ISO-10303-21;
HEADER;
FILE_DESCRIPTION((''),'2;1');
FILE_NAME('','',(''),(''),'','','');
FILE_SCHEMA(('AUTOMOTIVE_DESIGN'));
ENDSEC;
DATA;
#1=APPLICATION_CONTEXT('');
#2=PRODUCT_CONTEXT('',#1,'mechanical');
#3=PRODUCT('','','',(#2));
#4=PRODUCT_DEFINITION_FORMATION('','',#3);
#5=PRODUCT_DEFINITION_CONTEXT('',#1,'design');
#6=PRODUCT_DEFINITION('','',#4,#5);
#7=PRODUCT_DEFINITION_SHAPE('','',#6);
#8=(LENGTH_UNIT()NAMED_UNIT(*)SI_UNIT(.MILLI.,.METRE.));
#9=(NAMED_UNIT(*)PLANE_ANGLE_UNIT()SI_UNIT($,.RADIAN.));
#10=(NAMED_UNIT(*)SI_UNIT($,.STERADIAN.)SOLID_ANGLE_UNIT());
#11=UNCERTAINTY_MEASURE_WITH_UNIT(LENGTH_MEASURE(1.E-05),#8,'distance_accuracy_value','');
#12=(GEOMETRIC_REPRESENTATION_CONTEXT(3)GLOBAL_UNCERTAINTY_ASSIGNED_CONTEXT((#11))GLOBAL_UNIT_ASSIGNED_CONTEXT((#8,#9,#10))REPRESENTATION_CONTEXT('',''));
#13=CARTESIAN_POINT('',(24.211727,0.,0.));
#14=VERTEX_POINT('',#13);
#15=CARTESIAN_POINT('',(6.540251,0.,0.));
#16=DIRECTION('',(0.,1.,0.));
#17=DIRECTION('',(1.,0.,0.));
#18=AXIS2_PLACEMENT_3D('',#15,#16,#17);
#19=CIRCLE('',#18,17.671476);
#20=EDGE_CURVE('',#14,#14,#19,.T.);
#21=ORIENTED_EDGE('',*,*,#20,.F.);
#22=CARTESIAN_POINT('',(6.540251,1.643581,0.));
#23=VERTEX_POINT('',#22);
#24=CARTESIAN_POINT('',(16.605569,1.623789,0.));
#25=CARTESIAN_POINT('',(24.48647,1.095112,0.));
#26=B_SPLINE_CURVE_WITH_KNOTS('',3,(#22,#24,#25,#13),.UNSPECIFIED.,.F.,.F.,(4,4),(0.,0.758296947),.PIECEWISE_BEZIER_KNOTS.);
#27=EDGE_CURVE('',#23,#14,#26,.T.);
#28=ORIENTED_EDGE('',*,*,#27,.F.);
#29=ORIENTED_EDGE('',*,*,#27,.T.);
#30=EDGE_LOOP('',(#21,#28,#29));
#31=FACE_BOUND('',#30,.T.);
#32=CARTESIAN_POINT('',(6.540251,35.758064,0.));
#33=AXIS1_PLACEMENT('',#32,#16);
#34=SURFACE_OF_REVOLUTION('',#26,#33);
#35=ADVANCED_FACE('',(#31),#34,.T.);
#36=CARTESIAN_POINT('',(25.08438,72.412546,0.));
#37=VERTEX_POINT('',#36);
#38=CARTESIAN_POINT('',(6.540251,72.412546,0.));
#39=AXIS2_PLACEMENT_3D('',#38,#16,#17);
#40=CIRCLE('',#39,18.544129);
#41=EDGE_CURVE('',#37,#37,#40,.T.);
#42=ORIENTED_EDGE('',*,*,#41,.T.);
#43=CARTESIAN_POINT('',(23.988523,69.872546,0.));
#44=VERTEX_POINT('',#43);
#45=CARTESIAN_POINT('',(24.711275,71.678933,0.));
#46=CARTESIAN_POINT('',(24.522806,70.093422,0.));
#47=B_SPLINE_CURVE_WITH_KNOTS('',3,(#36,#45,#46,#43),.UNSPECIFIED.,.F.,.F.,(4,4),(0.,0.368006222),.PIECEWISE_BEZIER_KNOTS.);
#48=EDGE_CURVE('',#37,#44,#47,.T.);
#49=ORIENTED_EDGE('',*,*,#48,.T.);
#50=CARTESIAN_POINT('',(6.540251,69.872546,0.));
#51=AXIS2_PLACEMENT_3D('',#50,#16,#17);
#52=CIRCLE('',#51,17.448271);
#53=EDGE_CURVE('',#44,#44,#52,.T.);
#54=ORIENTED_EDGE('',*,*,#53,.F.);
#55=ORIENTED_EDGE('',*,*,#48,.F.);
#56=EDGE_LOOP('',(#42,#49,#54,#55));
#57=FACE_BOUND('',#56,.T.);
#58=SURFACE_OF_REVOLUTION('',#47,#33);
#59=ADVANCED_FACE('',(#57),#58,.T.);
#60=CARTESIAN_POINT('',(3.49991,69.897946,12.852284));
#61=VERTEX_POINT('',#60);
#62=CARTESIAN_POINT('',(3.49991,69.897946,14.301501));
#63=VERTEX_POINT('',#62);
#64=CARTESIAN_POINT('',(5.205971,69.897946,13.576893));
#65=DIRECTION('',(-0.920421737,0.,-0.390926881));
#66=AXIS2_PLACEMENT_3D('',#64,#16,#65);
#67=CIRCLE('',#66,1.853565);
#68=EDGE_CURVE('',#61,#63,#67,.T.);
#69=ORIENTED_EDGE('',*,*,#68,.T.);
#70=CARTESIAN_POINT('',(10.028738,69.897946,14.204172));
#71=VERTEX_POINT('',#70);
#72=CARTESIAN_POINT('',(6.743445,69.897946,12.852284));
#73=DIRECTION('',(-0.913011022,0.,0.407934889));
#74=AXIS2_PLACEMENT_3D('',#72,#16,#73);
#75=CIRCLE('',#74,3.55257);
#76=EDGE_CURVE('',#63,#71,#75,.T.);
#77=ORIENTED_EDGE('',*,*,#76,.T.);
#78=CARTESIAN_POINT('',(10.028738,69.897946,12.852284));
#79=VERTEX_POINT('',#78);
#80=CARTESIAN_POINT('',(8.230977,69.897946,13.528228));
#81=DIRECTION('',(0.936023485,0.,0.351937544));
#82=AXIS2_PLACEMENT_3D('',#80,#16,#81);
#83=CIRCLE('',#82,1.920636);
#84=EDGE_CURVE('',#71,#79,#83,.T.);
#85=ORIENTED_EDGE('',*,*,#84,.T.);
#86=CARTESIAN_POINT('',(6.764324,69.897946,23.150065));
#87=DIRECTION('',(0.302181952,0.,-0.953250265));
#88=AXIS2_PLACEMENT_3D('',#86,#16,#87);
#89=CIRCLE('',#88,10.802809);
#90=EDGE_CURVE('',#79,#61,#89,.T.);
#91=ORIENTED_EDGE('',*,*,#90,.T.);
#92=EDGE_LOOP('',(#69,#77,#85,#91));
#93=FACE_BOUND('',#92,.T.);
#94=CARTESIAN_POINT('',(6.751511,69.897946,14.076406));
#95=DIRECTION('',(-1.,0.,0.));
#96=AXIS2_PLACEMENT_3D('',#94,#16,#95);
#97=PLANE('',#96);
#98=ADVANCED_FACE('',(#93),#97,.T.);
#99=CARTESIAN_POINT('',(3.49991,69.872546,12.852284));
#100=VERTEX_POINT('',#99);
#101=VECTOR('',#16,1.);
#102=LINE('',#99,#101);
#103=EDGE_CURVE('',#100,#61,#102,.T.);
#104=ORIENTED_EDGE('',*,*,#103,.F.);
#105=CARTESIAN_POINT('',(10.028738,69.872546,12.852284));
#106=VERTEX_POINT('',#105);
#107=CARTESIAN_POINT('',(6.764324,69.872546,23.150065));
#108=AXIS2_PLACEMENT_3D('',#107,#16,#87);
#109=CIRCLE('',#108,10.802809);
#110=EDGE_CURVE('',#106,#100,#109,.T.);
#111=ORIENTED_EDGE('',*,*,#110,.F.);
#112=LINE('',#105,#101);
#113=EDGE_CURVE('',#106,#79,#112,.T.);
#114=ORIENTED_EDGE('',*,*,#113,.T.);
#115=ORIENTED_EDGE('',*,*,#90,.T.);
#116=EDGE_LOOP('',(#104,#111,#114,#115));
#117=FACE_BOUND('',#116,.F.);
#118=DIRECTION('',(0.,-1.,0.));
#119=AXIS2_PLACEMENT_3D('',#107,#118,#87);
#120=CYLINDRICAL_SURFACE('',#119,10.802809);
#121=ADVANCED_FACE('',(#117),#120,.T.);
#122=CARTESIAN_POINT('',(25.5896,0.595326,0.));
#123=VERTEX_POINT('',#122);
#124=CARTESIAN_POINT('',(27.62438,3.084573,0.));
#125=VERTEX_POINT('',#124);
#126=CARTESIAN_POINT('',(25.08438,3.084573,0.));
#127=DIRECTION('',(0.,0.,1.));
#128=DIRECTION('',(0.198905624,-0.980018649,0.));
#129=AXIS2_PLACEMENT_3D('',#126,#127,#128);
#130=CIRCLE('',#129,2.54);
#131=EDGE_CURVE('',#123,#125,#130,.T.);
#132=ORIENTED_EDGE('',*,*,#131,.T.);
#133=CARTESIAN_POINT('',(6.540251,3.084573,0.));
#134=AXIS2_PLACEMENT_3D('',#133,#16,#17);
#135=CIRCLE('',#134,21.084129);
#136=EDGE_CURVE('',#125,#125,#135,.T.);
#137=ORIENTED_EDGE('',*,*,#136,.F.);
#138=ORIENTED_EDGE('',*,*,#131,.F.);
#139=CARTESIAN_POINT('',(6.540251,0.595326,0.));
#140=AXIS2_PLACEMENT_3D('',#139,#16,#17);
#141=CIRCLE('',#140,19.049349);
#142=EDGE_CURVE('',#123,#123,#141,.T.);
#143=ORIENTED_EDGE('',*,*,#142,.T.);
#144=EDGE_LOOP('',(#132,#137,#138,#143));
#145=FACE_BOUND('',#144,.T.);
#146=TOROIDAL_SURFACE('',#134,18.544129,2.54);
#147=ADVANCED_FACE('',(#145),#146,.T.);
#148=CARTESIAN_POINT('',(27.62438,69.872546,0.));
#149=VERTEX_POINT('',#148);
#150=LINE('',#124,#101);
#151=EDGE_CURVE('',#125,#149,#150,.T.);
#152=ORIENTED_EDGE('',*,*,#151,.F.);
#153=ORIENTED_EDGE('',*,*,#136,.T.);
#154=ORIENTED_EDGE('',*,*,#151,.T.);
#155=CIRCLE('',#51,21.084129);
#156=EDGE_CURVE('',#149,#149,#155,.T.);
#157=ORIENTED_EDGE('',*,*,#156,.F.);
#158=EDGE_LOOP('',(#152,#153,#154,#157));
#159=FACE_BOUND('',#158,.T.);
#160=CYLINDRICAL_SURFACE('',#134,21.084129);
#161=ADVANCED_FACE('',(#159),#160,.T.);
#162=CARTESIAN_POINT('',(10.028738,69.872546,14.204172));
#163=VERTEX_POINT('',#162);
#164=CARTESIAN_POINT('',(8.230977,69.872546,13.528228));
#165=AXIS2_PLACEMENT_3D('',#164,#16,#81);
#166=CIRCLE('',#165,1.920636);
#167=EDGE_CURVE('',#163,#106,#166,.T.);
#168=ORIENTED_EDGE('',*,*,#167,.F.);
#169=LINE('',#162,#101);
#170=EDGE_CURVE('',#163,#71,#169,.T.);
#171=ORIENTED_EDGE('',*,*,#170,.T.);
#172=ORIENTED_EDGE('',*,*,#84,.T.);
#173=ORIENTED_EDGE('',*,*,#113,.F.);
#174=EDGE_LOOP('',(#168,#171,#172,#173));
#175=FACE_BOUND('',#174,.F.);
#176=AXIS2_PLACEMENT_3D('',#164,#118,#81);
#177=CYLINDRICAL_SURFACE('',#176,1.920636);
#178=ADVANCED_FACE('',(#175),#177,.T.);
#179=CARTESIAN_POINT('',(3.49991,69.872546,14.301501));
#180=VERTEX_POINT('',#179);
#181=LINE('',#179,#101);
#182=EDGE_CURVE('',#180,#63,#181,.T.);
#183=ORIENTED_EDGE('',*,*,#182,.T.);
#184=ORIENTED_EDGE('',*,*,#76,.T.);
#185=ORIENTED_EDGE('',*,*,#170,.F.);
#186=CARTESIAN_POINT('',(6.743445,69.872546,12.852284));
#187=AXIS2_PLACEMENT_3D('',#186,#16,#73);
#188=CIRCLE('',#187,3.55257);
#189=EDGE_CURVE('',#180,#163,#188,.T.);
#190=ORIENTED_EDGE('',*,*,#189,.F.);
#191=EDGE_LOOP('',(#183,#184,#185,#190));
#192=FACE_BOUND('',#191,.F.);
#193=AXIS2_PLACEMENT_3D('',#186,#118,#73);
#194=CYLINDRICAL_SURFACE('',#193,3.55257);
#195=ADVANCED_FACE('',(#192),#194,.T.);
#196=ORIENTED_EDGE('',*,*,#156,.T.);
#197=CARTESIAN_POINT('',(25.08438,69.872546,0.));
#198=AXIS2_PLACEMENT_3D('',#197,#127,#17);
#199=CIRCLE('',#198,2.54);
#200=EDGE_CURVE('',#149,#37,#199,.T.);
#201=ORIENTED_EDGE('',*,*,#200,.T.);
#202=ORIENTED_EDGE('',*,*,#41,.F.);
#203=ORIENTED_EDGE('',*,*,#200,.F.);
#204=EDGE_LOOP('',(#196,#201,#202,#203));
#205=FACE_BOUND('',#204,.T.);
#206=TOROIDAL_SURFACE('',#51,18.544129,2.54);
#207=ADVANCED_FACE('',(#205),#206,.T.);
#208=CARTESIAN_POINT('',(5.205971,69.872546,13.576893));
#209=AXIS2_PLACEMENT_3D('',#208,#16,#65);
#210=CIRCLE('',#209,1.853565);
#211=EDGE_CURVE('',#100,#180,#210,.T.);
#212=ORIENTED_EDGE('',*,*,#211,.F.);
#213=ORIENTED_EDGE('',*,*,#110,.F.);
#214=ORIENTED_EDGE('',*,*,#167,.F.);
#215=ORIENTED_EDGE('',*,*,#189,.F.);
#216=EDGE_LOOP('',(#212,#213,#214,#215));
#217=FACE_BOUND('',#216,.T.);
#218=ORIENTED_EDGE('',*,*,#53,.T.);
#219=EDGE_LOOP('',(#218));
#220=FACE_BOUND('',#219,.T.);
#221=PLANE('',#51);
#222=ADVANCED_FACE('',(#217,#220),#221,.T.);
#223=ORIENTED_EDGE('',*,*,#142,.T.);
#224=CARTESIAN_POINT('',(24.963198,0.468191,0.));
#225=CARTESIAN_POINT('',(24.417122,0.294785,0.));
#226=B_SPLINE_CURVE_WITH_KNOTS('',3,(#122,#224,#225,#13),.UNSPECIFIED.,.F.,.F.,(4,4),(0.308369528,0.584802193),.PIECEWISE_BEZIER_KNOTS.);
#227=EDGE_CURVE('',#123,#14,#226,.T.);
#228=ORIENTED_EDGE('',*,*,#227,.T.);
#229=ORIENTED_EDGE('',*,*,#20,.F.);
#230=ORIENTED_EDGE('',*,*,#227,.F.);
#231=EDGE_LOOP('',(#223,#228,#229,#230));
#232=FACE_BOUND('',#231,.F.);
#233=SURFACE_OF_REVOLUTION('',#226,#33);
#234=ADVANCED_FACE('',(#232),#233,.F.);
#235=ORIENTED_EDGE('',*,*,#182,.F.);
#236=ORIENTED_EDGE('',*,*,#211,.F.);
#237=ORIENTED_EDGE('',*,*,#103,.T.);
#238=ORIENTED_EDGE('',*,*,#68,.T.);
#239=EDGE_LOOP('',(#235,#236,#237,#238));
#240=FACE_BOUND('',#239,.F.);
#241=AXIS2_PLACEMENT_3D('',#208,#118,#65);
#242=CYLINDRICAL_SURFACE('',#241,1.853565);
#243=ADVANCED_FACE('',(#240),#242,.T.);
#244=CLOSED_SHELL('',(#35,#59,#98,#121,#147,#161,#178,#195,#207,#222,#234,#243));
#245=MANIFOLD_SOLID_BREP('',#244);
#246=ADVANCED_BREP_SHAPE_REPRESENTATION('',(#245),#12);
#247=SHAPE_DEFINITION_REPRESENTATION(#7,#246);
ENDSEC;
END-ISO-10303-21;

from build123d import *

# Parameters (mm, degrees)
F3_DEPTH = 0.0254


with BuildPart() as f1:
    # F0 (on Top) → F1 (revolve)
    with BuildSketch(Plane.XY):
        with BuildLine():
            Line((6.5402514301, 69.8725463986), (6.5402514301, 1.6435814323))
            add(Edge.make_bspline(
                [(6.5402514301, 1.6435814323), (16.6055685907, 1.6237888089), (24.4864700581, 1.0951121643), (24.2117271912, 0)],
                knots=[0, 0, 0, 0, 0.7582969465, 0.7582969465, 0.7582969465, 0.7582969465], degree=3))
            add(Edge.make_bspline(
                [(25.5896002368, 0.5953258758), (24.9631976139, 0.4681905354), (24.4171222, 0.2947845137), (24.2117271912, 0)],
                knots=[0.3083695275, 0.3083695275, 0.3083695275, 0.3083695275, 0.5848021934, 0.5848021934, 0.5848021934, 0.5848021934], degree=3))
            ThreePointArc((25.5896002368, 0.5953258758), (27.050958138, 1.47703779), (27.624379952, 3.0845732447))
            Line((27.624379952, 3.0845732447), (27.624379952, 69.8725463986))
            ThreePointArc((27.624379952, 69.8725463986), (26.8804311762, 71.6685976229), (25.084379952, 72.4125463986))
            add(Edge.make_bspline(
                [(25.084379952, 72.4125463986), (24.711275029, 71.678932761), (24.5228062968, 70.0934224878), (23.9885225892, 69.8725463986)],
                knots=[0, 0, 0, 0, 0.3680062222, 0.3680062222, 0.3680062222, 0.3680062222], degree=3))
            add(Edge.make_bspline(
                [(23.9885225892, 69.8725463986), (23.8915327068, 69.8324501995), (23.783146815, 69.837324245), (23.6659098082, 69.8725463986)],
                knots=[0.3680062222, 0.3680062222, 0.3680062222, 0.3680062222, 0.4348113291, 0.4348113291, 0.4348113291, 0.4348113291], degree=3))
            Line((23.6659098082, 69.8725463986), (6.5402514301, 69.8725463986))
        make_face()
        with BuildLine():
            Line((23.9885225892, 69.8725463986), (23.6659098082, 69.8725463986))
            add(Edge.make_bspline(
                [(23.9885225892, 69.8725463986), (23.8915327068, 69.8324501995), (23.783146815, 69.837324245), (23.6659098082, 69.8725463986)],
                knots=[0.3680062222, 0.3680062222, 0.3680062222, 0.3680062222, 0.4348113291, 0.4348113291, 0.4348113291, 0.4348113291], degree=3))
        make_face()
    revolve(axis=Axis((6.5402514301, 35.7580639155, 0), (0, 1, 0)))

    # F2 (on face) → F3 (join)
    with BuildSketch(Plane(origin=(0, 69.8725463986, 0), x_dir=(-1, 0, 0), z_dir=(0, 1, 0))):
        with BuildLine():
            ThreePointArc((-3.4999095369, 12.8522840624), (-3.3524060249, 13.5768925878), (-3.4999095369, 14.3015011132))
            ThreePointArc((-3.4999095369, 14.3015011132), (-6.7963991448, 16.4044588849), (-10.0287375972, 14.2041718005))
            ThreePointArc((-10.0287375972, 14.2041718005), (-10.1516131859, 13.5282279315), (-10.0287375972, 12.8522840624))
            ThreePointArc((-10.0287375972, 12.8522840624), (-6.764323567, 12.3472555866), (-3.4999095369, 12.8522840624))
        make_face()
    extrude(amount=F3_DEPTH)


solid = f1.part
